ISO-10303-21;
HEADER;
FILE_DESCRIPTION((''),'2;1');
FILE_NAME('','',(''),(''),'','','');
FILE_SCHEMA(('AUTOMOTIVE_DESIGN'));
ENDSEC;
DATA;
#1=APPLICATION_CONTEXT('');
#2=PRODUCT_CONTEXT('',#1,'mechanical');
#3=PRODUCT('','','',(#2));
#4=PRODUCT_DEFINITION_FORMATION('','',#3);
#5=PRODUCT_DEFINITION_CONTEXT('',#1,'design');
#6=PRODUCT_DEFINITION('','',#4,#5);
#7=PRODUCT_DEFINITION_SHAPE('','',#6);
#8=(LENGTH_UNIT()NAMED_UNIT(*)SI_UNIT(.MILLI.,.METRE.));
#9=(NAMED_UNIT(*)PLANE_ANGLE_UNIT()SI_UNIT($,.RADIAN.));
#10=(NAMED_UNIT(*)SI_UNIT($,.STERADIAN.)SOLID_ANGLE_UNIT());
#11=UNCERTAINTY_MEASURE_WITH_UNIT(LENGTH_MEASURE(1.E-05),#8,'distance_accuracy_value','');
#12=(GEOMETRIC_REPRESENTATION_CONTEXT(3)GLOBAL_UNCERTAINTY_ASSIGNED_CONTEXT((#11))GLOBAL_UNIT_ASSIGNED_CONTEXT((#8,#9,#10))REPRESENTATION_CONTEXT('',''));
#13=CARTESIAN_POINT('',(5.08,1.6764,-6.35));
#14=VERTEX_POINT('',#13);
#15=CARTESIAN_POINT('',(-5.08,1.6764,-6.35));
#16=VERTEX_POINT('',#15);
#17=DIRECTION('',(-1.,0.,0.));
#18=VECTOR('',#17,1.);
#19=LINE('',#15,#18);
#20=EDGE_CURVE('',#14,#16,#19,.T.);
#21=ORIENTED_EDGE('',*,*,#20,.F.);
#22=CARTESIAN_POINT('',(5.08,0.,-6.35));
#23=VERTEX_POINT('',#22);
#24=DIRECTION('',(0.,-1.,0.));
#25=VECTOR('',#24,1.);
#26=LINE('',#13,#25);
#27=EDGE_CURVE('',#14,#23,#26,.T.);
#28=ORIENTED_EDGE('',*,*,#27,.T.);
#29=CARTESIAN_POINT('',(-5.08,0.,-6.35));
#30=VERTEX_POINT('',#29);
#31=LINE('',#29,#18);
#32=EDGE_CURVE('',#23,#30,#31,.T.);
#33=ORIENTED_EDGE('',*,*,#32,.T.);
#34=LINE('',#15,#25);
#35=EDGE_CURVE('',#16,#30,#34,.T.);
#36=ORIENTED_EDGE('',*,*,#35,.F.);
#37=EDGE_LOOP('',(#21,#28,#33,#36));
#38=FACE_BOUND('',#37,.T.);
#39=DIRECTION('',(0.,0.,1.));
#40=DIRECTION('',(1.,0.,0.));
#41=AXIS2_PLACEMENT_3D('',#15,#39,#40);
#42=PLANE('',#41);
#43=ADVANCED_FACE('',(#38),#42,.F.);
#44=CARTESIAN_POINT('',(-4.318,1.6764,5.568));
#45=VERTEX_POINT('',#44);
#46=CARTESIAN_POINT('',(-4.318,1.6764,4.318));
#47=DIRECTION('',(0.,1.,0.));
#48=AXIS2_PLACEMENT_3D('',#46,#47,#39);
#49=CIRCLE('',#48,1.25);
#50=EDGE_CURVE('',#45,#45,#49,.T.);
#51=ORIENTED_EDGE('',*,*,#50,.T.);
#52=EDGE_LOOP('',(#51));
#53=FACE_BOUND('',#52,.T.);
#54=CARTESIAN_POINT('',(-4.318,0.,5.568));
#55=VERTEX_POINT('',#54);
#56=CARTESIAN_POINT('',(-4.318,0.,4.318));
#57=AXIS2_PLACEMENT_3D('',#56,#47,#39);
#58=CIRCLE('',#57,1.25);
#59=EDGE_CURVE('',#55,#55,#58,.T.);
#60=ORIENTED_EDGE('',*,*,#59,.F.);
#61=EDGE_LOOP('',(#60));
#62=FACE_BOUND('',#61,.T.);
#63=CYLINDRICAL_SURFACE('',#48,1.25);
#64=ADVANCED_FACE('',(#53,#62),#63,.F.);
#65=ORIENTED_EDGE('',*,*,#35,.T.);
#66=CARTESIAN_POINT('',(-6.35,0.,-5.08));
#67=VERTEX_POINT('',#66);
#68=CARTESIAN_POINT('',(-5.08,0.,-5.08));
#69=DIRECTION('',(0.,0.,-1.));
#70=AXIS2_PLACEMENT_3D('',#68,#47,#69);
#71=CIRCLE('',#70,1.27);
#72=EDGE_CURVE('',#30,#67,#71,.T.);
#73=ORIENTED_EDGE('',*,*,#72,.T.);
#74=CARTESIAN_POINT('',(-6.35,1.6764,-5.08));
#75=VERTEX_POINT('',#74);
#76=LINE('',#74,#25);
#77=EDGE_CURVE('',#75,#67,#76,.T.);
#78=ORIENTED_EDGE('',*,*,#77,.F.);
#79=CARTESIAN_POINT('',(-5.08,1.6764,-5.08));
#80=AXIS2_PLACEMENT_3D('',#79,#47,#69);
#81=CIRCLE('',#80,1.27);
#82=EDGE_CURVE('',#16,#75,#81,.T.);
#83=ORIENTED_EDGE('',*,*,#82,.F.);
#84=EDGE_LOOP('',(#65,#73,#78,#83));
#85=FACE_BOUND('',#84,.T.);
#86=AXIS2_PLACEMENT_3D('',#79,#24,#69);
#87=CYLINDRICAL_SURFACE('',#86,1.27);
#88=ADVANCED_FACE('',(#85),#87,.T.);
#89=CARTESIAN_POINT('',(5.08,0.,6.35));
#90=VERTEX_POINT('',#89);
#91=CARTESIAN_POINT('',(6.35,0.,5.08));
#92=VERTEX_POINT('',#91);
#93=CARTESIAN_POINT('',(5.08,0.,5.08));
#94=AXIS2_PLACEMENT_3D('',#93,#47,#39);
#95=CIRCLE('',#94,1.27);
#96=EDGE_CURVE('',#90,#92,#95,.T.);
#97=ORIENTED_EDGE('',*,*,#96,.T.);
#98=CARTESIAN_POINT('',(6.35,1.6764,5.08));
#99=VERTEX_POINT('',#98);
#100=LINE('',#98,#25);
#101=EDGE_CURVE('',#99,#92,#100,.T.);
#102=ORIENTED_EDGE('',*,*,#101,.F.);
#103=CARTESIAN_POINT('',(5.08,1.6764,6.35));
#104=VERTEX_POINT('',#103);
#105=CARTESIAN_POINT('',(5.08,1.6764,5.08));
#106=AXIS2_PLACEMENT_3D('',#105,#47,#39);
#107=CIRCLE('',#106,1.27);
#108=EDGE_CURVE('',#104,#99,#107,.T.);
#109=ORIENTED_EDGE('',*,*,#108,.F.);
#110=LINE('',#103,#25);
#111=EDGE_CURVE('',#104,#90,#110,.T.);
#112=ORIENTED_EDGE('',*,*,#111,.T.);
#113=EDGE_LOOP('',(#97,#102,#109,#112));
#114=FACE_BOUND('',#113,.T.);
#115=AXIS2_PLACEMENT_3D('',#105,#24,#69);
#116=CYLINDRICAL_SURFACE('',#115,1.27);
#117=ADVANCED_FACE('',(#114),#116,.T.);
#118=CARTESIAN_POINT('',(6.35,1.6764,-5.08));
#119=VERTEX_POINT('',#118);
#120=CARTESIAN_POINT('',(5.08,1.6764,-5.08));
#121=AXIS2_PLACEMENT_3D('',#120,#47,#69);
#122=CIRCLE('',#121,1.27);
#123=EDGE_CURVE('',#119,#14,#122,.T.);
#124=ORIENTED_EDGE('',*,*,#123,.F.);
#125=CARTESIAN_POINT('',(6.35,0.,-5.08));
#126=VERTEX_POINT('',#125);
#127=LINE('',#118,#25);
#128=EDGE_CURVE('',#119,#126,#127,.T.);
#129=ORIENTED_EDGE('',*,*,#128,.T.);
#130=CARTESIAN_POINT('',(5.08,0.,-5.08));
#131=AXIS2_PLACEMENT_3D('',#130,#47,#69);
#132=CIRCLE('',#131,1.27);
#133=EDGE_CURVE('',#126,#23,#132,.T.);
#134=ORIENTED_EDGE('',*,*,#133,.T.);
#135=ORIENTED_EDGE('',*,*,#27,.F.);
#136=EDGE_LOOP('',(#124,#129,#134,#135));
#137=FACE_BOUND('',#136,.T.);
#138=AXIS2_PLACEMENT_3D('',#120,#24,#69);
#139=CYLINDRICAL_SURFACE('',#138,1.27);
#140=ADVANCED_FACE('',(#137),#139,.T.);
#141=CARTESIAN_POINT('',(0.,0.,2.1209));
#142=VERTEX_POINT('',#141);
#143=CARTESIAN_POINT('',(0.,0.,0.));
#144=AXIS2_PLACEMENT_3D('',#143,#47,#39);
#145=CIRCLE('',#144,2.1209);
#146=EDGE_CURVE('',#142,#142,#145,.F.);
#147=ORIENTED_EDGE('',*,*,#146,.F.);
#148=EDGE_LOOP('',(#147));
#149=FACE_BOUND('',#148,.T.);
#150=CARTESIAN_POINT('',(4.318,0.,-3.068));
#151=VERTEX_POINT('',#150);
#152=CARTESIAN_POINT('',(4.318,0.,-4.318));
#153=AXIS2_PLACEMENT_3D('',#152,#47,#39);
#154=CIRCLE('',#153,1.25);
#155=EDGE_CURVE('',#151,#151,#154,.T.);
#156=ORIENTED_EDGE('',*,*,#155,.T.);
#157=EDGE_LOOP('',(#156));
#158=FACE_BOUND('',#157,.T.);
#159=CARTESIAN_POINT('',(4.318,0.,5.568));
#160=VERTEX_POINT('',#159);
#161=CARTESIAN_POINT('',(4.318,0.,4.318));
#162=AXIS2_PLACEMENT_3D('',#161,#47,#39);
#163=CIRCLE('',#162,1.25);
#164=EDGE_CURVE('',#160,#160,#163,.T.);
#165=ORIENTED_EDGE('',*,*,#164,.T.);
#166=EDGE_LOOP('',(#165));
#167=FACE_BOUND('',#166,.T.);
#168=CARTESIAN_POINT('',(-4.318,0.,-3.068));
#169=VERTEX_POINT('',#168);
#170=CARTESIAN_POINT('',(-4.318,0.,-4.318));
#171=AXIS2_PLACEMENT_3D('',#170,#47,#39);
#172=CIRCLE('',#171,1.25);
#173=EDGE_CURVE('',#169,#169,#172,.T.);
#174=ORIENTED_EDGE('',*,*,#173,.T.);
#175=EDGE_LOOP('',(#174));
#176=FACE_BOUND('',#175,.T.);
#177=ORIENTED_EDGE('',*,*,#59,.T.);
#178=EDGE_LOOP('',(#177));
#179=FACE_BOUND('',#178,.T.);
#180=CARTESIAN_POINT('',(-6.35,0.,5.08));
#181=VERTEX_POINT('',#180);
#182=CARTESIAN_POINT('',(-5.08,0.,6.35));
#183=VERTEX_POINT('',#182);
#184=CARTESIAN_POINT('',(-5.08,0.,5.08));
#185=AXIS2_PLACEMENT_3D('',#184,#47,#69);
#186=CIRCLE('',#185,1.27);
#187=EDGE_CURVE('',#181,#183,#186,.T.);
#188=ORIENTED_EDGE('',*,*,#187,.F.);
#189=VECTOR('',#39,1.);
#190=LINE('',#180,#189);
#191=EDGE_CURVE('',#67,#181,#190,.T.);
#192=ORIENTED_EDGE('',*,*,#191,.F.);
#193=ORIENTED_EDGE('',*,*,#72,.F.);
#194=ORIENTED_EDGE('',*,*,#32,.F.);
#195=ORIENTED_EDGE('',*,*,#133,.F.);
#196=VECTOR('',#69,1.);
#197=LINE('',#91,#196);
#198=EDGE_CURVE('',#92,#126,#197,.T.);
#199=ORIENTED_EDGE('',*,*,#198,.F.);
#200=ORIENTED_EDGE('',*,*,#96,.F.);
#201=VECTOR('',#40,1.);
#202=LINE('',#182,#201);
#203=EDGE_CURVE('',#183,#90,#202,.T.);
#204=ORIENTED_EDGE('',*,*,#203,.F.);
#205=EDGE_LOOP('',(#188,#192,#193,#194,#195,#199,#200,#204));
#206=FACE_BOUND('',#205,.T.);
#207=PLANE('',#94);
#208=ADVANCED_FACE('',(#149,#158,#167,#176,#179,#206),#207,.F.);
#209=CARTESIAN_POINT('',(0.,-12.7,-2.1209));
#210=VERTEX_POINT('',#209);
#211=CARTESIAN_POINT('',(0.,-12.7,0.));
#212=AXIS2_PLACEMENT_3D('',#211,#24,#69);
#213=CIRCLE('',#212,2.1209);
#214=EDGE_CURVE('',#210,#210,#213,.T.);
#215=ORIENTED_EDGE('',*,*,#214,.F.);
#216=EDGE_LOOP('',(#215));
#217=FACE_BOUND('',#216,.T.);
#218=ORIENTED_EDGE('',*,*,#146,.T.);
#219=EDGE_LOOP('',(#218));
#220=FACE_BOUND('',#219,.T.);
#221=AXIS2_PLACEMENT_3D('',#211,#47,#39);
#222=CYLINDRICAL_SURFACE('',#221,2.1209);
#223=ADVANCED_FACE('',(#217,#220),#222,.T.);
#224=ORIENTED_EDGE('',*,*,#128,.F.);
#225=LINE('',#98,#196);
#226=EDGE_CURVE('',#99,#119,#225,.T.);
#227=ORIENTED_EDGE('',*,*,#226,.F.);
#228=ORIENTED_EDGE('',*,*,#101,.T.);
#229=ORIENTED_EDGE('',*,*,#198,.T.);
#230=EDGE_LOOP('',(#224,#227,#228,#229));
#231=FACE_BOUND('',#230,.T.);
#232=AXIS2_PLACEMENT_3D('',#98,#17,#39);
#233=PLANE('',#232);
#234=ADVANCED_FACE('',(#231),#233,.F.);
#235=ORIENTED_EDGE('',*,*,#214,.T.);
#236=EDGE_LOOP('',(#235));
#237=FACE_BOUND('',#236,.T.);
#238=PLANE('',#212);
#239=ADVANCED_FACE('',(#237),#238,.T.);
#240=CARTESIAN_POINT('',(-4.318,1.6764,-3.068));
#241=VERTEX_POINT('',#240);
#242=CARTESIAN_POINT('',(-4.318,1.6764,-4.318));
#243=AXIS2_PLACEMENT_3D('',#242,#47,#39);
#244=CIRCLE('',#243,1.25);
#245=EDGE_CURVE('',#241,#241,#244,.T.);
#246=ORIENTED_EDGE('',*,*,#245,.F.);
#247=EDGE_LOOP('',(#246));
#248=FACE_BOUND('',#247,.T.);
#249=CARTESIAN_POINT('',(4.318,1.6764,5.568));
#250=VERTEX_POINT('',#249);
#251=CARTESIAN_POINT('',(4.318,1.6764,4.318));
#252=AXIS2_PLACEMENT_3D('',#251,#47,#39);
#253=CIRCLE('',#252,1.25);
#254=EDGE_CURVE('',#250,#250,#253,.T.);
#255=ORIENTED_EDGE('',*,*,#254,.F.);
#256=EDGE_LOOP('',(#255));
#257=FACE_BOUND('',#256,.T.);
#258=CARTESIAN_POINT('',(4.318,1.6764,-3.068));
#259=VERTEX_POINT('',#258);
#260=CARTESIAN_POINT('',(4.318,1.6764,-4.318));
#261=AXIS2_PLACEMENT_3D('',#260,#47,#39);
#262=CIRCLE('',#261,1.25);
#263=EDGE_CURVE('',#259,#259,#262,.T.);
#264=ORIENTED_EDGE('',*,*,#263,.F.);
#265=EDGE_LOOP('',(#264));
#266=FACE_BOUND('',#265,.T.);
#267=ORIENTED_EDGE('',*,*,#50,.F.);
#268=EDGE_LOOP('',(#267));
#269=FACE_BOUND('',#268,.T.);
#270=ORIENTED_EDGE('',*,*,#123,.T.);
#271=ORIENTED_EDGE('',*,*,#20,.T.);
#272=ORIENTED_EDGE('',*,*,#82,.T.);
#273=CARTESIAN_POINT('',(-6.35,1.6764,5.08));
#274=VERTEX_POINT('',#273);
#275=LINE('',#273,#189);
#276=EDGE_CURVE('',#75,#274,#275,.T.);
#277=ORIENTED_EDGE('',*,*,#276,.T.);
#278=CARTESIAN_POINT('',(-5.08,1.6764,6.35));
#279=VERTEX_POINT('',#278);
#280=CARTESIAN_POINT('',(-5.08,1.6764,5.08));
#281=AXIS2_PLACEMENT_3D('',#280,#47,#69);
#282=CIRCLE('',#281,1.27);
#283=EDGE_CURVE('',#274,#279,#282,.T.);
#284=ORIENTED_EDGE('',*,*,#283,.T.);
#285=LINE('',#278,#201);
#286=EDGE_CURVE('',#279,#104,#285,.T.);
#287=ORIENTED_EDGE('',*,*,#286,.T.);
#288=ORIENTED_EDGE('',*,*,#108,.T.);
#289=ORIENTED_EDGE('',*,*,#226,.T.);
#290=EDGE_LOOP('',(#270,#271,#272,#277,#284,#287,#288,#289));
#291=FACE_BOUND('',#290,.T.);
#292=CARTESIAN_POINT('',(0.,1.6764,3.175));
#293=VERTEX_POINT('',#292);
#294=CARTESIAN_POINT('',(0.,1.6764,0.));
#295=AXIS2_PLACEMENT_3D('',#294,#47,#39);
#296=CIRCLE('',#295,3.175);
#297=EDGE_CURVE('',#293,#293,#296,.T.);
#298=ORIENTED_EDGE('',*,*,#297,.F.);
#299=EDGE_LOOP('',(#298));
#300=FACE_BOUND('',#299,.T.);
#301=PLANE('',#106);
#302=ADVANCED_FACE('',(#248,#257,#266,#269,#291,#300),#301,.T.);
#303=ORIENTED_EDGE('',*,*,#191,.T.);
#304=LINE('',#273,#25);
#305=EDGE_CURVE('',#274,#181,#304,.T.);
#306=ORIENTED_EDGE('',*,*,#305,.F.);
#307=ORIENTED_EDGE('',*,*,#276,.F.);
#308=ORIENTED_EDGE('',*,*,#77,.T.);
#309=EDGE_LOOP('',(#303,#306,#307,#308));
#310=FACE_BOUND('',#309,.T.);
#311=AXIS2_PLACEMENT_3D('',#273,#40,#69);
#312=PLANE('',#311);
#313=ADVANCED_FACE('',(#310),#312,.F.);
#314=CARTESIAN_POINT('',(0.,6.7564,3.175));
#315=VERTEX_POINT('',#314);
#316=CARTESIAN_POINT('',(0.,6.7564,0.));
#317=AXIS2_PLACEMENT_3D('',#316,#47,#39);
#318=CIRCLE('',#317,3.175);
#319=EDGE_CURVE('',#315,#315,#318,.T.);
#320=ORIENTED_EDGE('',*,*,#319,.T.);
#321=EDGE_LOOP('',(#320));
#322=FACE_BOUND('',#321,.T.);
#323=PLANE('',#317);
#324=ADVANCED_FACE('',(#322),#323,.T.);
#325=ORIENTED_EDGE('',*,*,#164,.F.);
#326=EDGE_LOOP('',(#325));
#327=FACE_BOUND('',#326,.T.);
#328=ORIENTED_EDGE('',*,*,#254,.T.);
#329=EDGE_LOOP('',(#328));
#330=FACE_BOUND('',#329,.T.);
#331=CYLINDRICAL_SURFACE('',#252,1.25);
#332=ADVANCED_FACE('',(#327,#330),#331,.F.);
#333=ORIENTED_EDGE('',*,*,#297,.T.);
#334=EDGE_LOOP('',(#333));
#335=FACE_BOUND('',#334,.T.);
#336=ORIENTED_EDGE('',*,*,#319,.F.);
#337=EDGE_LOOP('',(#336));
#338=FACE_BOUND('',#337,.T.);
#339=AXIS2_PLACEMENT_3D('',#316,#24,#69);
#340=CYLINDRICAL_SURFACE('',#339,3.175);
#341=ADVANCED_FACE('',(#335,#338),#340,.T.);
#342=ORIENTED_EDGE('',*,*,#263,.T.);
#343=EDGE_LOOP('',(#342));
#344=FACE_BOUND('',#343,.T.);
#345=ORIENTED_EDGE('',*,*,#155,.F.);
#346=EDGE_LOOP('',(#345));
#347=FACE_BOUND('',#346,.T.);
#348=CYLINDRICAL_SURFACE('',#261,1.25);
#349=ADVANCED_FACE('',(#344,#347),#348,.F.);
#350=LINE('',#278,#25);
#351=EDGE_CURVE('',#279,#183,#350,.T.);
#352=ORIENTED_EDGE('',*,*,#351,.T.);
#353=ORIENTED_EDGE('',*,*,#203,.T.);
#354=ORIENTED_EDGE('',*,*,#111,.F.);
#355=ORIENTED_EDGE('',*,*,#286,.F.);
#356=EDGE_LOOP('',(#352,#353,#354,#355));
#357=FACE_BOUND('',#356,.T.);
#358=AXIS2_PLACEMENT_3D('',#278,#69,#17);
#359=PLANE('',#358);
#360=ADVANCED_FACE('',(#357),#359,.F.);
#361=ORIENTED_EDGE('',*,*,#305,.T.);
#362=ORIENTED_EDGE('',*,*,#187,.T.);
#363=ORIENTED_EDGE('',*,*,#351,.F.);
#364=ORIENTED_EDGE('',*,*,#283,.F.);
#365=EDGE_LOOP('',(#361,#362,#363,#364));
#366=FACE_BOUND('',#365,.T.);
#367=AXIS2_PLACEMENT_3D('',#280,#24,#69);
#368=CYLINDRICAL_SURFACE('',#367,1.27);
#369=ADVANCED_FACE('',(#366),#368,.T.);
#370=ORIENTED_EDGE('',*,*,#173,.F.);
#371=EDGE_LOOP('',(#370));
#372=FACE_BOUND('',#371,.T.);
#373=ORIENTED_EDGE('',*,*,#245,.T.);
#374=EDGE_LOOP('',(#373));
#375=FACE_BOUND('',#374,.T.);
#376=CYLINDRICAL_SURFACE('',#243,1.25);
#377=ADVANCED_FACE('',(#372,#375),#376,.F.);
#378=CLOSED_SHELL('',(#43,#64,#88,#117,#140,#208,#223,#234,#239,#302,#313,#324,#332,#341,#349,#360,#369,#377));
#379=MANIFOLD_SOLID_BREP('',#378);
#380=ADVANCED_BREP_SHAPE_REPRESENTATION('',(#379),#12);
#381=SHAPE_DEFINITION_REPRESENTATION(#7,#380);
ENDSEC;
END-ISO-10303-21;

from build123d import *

# Parameters (mm, degrees)
BOSS_EXTRUDE1_DEPTH           = 1.6764
F_2_5MM_DOWEL_HOLE1_OUTLINE_R = 1.25
F_2_5MM_DOWEL_HOLE1_DEPTH     = 1.6764
SKETCH4_R                     = 3.175
BOSS_EXTRUDE2_DEPTH           = 5.08
SKETCH5_R                     = 2.1209
BOSS_EXTRUDE3_DEPTH           = 12.7


# Read off the part's stored shape, not the designer's step: Ø2.5mm Dowel Hole1
with BuildPart() as part:
    # Sketch1 → Boss-Extrude1 (new body)
    with BuildSketch(Plane(origin=(0, 0, 0), x_dir=(1, 0, 0), z_dir=(0, 1, 0))):
        with BuildLine():
            Line((-5.08, -6.35), (5.08, -6.35))
            ThreePointArc((5.08, -6.35), (5.978025612, -5.978025612), (6.35, -5.08))
            Line((6.35, -5.08), (6.35, 5.08))
            ThreePointArc((6.35, 5.08), (5.978025612, 5.978025612), (5.08, 6.35))
            Line((5.08, 6.35), (-5.08, 6.35))
            ThreePointArc((-5.08, 6.35), (-5.978025612, 5.978025612), (-6.35, 5.08))
            Line((-6.35, 5.08), (-6.35, -5.08))
            ThreePointArc((-6.35, -5.08), (-5.978025612, -5.978025612), (-5.08, -6.35))
        make_face()
    extrude(amount=BOSS_EXTRUDE1_DEPTH)

    # Ø2.5mm Dowel Hole1 outline → Ø2.5mm Dowel Hole1 (cut)
    with BuildSketch(Plane(origin=(0, 0, 0), x_dir=(1, 0, 0), z_dir=(0, 1, 0))):
        with Locations((4.318, -4.318)):
            Circle(F_2_5MM_DOWEL_HOLE1_OUTLINE_R)
        with Locations((-4.318, 4.318)):
            Circle(F_2_5MM_DOWEL_HOLE1_OUTLINE_R)
        with Locations((-4.318, -4.318)):
            Circle(F_2_5MM_DOWEL_HOLE1_OUTLINE_R)
        with Locations((4.318, 4.318)):
            Circle(F_2_5MM_DOWEL_HOLE1_OUTLINE_R)
    extrude(amount=F_2_5MM_DOWEL_HOLE1_DEPTH, mode=Mode.SUBTRACT)

    # Sketch4 → Boss-Extrude2 (add)
    with BuildSketch(Plane(origin=(0, 1.6764, 0), x_dir=(1, 0, 0), z_dir=(0, 1, 0))):
        with Locations(Location((0, 0, 0), (0, 0, 270))):
            Circle(SKETCH4_R)
    extrude(amount=BOSS_EXTRUDE2_DEPTH)

    # Sketch5 → Boss-Extrude3 (add)
    with BuildSketch(Plane.XZ):
        with Locations(Location((0, 0, 0), (0, 0, 90))):
            Circle(SKETCH5_R)
    extrude(amount=BOSS_EXTRUDE3_DEPTH)


solid = part.part
